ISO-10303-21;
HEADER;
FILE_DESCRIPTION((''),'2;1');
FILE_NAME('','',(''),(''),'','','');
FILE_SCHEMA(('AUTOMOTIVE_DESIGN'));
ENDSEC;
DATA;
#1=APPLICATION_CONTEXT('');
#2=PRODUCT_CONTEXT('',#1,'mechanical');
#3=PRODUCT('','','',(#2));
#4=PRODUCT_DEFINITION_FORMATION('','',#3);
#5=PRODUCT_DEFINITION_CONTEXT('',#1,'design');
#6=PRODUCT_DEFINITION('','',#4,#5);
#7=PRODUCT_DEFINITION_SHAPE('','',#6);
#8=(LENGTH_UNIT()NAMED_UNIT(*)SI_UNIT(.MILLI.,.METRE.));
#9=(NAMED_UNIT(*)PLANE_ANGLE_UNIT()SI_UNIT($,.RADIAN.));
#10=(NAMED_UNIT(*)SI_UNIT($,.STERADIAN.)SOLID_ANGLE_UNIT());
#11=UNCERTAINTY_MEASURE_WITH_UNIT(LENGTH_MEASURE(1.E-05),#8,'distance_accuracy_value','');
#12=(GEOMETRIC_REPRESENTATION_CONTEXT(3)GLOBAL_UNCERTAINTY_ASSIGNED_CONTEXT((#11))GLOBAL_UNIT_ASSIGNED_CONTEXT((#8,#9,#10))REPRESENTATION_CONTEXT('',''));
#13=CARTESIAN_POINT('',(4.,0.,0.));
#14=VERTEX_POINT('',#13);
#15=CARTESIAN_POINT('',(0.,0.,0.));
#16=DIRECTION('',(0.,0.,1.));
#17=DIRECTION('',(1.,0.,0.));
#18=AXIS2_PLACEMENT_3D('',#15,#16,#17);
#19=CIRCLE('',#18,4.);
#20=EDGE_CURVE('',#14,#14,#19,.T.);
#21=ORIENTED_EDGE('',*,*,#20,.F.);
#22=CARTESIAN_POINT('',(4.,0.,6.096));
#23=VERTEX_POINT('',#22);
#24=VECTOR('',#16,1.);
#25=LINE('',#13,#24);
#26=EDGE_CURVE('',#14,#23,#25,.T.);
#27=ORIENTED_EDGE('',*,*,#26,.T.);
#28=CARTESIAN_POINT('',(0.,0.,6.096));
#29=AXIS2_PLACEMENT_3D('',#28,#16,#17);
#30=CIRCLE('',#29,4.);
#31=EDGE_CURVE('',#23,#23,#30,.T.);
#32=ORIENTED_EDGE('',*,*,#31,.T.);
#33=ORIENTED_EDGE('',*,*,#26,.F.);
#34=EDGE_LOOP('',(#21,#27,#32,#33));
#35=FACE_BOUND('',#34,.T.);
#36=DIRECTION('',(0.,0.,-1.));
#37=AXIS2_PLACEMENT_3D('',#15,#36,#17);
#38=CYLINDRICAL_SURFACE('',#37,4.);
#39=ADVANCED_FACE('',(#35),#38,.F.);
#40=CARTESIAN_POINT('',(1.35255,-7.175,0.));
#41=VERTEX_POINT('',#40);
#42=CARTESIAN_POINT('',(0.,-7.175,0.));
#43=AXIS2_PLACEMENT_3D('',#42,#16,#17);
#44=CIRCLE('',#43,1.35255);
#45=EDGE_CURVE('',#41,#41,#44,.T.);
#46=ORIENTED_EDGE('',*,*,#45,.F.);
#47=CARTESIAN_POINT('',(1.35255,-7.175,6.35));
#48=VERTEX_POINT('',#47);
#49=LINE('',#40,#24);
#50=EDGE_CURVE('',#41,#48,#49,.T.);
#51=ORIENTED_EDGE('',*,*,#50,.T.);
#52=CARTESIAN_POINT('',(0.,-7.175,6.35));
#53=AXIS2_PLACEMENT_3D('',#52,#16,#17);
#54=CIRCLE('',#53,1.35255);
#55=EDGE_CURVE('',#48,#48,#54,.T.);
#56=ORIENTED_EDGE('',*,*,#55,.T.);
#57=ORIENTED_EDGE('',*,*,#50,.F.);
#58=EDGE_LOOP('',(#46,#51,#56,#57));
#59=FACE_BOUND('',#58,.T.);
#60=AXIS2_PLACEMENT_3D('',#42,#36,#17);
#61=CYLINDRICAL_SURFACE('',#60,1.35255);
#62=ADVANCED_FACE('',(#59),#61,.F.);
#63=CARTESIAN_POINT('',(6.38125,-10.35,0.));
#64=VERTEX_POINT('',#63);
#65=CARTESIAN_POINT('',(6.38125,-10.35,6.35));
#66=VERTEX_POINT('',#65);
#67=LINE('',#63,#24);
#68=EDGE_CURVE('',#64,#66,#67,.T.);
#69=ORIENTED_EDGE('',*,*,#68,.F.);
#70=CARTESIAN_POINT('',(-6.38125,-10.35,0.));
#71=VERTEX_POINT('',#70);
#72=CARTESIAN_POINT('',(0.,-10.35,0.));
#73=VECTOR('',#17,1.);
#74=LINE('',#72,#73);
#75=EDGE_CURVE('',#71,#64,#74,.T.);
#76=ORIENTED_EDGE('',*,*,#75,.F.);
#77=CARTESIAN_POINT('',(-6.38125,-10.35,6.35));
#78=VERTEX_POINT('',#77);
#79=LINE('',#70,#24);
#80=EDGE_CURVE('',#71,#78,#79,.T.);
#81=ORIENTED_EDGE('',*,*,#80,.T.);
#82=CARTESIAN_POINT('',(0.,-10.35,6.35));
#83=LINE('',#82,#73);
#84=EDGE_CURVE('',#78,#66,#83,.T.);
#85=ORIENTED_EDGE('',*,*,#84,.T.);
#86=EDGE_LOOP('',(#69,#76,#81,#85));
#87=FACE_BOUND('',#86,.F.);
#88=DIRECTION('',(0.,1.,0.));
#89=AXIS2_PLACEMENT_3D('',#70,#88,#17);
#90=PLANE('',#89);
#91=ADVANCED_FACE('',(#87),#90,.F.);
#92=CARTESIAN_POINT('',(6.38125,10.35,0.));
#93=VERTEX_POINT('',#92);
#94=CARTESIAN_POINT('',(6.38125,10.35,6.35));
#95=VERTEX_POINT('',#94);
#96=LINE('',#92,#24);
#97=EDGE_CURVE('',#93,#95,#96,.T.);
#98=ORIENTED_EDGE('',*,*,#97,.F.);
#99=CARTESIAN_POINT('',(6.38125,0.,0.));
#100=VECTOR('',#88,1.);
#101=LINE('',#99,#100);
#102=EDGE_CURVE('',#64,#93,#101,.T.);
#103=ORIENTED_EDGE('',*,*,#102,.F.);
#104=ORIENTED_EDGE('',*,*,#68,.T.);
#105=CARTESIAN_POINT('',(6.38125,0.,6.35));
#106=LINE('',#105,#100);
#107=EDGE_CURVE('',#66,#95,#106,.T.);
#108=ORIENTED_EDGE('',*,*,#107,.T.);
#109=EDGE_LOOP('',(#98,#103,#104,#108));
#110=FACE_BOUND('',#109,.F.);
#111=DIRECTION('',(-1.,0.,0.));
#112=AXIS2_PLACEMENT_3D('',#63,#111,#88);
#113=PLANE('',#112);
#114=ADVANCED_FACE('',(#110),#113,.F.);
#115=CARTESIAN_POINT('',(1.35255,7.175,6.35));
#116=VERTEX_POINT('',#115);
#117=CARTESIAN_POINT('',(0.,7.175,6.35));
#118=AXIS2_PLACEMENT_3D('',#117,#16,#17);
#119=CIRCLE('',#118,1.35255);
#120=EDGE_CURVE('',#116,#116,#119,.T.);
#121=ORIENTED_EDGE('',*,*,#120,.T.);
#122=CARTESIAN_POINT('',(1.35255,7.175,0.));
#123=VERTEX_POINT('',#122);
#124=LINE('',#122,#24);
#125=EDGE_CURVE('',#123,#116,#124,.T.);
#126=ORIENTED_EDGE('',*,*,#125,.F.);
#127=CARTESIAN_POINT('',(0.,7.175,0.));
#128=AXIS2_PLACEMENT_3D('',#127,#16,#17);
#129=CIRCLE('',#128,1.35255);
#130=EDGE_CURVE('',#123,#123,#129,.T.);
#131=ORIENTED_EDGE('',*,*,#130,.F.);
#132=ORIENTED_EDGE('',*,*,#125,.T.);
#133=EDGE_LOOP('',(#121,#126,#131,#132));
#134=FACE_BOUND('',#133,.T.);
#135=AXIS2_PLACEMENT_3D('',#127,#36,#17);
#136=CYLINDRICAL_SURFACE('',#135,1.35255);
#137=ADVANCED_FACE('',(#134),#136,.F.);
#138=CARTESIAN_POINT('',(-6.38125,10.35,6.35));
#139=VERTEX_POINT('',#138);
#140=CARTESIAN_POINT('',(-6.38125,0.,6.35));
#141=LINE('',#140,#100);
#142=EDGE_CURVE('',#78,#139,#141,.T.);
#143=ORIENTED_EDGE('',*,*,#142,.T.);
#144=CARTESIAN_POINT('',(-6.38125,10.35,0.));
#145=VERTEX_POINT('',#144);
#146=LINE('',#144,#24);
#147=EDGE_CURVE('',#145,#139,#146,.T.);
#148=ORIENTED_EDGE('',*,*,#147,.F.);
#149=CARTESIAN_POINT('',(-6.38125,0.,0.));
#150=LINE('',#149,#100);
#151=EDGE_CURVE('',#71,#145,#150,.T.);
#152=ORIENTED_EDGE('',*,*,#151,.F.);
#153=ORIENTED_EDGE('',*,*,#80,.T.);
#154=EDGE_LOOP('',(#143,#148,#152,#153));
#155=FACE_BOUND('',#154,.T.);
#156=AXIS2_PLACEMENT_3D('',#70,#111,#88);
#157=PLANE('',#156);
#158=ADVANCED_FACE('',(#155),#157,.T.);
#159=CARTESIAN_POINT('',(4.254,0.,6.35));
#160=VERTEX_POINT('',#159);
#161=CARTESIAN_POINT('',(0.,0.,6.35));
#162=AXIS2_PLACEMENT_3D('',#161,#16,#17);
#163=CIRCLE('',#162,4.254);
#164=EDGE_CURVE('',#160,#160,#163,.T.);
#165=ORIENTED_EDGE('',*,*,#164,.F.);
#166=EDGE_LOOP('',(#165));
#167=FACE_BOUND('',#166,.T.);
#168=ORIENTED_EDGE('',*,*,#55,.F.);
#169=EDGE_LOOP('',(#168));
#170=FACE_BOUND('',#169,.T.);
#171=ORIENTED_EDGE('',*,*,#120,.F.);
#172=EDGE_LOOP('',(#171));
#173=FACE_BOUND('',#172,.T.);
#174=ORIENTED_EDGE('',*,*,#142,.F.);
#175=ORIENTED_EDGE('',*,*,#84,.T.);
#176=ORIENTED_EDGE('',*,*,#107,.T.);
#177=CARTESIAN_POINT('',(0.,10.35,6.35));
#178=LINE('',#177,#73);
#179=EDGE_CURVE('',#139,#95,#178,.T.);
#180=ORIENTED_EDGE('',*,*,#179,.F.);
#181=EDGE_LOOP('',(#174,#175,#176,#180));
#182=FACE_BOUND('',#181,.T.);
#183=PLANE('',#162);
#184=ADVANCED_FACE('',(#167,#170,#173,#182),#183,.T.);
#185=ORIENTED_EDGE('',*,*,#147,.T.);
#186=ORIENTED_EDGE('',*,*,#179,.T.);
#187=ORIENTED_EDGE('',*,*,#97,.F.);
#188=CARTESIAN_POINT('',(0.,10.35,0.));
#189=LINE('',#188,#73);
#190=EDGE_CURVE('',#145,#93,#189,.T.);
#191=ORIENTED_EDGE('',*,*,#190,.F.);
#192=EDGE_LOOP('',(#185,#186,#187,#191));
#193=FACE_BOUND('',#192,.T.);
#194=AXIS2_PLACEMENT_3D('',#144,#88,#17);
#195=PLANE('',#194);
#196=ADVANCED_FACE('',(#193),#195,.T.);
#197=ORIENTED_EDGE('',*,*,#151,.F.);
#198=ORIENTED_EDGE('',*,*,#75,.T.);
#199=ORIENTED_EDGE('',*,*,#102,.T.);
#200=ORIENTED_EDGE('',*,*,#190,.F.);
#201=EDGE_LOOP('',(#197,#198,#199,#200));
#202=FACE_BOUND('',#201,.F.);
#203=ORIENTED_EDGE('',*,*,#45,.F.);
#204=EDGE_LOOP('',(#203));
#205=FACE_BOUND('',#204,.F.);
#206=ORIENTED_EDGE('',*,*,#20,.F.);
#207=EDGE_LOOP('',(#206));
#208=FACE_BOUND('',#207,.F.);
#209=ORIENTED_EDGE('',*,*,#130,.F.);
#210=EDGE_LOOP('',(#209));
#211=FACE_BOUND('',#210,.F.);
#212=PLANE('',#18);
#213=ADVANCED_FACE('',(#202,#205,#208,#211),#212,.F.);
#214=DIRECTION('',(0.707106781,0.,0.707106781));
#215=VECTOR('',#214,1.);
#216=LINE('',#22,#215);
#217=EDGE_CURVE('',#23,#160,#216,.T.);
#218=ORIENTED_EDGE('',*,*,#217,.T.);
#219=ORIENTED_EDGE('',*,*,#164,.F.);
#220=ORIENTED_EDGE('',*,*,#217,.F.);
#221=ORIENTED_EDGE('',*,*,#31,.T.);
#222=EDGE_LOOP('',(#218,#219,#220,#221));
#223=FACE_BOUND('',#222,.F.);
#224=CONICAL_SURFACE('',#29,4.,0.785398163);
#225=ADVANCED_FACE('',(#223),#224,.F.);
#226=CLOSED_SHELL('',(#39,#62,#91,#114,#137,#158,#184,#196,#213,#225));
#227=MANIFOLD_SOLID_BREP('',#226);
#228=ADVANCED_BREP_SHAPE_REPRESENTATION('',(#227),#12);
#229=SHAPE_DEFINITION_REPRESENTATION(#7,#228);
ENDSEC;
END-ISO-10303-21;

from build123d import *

# Parameters (mm, degrees)
F0_W     = 12.7625
F0_H     = 20.7
F0_R     = 1.35255
F0_R_2   = 4
F1_DEPTH = 6.35
F2_SIZE  = 0.254


# Not quite as in the source:
# - a feature names something its author has since deleted; it is built from what else it names


with BuildPart() as f1:
    # F0 (on Top) → F1 (new body)
    with BuildSketch(Plane.XY):
        Rectangle(F0_W, F0_H)
        with Locations((0, -7.175)):
            Circle(F0_R, mode=Mode.SUBTRACT)
        Circle(F0_R_2, mode=Mode.SUBTRACT)
        with Locations((0, 7.175)):
            Circle(F0_R, mode=Mode.SUBTRACT)
    extrude(amount=F1_DEPTH)

    # F2
    f2_edges = [f1.edges().sort_by_distance(p)[0] for p in [
        (-4, 0, 6.35),
    ]]
    chamfer(f2_edges, length=F2_SIZE)


solid = f1.part
